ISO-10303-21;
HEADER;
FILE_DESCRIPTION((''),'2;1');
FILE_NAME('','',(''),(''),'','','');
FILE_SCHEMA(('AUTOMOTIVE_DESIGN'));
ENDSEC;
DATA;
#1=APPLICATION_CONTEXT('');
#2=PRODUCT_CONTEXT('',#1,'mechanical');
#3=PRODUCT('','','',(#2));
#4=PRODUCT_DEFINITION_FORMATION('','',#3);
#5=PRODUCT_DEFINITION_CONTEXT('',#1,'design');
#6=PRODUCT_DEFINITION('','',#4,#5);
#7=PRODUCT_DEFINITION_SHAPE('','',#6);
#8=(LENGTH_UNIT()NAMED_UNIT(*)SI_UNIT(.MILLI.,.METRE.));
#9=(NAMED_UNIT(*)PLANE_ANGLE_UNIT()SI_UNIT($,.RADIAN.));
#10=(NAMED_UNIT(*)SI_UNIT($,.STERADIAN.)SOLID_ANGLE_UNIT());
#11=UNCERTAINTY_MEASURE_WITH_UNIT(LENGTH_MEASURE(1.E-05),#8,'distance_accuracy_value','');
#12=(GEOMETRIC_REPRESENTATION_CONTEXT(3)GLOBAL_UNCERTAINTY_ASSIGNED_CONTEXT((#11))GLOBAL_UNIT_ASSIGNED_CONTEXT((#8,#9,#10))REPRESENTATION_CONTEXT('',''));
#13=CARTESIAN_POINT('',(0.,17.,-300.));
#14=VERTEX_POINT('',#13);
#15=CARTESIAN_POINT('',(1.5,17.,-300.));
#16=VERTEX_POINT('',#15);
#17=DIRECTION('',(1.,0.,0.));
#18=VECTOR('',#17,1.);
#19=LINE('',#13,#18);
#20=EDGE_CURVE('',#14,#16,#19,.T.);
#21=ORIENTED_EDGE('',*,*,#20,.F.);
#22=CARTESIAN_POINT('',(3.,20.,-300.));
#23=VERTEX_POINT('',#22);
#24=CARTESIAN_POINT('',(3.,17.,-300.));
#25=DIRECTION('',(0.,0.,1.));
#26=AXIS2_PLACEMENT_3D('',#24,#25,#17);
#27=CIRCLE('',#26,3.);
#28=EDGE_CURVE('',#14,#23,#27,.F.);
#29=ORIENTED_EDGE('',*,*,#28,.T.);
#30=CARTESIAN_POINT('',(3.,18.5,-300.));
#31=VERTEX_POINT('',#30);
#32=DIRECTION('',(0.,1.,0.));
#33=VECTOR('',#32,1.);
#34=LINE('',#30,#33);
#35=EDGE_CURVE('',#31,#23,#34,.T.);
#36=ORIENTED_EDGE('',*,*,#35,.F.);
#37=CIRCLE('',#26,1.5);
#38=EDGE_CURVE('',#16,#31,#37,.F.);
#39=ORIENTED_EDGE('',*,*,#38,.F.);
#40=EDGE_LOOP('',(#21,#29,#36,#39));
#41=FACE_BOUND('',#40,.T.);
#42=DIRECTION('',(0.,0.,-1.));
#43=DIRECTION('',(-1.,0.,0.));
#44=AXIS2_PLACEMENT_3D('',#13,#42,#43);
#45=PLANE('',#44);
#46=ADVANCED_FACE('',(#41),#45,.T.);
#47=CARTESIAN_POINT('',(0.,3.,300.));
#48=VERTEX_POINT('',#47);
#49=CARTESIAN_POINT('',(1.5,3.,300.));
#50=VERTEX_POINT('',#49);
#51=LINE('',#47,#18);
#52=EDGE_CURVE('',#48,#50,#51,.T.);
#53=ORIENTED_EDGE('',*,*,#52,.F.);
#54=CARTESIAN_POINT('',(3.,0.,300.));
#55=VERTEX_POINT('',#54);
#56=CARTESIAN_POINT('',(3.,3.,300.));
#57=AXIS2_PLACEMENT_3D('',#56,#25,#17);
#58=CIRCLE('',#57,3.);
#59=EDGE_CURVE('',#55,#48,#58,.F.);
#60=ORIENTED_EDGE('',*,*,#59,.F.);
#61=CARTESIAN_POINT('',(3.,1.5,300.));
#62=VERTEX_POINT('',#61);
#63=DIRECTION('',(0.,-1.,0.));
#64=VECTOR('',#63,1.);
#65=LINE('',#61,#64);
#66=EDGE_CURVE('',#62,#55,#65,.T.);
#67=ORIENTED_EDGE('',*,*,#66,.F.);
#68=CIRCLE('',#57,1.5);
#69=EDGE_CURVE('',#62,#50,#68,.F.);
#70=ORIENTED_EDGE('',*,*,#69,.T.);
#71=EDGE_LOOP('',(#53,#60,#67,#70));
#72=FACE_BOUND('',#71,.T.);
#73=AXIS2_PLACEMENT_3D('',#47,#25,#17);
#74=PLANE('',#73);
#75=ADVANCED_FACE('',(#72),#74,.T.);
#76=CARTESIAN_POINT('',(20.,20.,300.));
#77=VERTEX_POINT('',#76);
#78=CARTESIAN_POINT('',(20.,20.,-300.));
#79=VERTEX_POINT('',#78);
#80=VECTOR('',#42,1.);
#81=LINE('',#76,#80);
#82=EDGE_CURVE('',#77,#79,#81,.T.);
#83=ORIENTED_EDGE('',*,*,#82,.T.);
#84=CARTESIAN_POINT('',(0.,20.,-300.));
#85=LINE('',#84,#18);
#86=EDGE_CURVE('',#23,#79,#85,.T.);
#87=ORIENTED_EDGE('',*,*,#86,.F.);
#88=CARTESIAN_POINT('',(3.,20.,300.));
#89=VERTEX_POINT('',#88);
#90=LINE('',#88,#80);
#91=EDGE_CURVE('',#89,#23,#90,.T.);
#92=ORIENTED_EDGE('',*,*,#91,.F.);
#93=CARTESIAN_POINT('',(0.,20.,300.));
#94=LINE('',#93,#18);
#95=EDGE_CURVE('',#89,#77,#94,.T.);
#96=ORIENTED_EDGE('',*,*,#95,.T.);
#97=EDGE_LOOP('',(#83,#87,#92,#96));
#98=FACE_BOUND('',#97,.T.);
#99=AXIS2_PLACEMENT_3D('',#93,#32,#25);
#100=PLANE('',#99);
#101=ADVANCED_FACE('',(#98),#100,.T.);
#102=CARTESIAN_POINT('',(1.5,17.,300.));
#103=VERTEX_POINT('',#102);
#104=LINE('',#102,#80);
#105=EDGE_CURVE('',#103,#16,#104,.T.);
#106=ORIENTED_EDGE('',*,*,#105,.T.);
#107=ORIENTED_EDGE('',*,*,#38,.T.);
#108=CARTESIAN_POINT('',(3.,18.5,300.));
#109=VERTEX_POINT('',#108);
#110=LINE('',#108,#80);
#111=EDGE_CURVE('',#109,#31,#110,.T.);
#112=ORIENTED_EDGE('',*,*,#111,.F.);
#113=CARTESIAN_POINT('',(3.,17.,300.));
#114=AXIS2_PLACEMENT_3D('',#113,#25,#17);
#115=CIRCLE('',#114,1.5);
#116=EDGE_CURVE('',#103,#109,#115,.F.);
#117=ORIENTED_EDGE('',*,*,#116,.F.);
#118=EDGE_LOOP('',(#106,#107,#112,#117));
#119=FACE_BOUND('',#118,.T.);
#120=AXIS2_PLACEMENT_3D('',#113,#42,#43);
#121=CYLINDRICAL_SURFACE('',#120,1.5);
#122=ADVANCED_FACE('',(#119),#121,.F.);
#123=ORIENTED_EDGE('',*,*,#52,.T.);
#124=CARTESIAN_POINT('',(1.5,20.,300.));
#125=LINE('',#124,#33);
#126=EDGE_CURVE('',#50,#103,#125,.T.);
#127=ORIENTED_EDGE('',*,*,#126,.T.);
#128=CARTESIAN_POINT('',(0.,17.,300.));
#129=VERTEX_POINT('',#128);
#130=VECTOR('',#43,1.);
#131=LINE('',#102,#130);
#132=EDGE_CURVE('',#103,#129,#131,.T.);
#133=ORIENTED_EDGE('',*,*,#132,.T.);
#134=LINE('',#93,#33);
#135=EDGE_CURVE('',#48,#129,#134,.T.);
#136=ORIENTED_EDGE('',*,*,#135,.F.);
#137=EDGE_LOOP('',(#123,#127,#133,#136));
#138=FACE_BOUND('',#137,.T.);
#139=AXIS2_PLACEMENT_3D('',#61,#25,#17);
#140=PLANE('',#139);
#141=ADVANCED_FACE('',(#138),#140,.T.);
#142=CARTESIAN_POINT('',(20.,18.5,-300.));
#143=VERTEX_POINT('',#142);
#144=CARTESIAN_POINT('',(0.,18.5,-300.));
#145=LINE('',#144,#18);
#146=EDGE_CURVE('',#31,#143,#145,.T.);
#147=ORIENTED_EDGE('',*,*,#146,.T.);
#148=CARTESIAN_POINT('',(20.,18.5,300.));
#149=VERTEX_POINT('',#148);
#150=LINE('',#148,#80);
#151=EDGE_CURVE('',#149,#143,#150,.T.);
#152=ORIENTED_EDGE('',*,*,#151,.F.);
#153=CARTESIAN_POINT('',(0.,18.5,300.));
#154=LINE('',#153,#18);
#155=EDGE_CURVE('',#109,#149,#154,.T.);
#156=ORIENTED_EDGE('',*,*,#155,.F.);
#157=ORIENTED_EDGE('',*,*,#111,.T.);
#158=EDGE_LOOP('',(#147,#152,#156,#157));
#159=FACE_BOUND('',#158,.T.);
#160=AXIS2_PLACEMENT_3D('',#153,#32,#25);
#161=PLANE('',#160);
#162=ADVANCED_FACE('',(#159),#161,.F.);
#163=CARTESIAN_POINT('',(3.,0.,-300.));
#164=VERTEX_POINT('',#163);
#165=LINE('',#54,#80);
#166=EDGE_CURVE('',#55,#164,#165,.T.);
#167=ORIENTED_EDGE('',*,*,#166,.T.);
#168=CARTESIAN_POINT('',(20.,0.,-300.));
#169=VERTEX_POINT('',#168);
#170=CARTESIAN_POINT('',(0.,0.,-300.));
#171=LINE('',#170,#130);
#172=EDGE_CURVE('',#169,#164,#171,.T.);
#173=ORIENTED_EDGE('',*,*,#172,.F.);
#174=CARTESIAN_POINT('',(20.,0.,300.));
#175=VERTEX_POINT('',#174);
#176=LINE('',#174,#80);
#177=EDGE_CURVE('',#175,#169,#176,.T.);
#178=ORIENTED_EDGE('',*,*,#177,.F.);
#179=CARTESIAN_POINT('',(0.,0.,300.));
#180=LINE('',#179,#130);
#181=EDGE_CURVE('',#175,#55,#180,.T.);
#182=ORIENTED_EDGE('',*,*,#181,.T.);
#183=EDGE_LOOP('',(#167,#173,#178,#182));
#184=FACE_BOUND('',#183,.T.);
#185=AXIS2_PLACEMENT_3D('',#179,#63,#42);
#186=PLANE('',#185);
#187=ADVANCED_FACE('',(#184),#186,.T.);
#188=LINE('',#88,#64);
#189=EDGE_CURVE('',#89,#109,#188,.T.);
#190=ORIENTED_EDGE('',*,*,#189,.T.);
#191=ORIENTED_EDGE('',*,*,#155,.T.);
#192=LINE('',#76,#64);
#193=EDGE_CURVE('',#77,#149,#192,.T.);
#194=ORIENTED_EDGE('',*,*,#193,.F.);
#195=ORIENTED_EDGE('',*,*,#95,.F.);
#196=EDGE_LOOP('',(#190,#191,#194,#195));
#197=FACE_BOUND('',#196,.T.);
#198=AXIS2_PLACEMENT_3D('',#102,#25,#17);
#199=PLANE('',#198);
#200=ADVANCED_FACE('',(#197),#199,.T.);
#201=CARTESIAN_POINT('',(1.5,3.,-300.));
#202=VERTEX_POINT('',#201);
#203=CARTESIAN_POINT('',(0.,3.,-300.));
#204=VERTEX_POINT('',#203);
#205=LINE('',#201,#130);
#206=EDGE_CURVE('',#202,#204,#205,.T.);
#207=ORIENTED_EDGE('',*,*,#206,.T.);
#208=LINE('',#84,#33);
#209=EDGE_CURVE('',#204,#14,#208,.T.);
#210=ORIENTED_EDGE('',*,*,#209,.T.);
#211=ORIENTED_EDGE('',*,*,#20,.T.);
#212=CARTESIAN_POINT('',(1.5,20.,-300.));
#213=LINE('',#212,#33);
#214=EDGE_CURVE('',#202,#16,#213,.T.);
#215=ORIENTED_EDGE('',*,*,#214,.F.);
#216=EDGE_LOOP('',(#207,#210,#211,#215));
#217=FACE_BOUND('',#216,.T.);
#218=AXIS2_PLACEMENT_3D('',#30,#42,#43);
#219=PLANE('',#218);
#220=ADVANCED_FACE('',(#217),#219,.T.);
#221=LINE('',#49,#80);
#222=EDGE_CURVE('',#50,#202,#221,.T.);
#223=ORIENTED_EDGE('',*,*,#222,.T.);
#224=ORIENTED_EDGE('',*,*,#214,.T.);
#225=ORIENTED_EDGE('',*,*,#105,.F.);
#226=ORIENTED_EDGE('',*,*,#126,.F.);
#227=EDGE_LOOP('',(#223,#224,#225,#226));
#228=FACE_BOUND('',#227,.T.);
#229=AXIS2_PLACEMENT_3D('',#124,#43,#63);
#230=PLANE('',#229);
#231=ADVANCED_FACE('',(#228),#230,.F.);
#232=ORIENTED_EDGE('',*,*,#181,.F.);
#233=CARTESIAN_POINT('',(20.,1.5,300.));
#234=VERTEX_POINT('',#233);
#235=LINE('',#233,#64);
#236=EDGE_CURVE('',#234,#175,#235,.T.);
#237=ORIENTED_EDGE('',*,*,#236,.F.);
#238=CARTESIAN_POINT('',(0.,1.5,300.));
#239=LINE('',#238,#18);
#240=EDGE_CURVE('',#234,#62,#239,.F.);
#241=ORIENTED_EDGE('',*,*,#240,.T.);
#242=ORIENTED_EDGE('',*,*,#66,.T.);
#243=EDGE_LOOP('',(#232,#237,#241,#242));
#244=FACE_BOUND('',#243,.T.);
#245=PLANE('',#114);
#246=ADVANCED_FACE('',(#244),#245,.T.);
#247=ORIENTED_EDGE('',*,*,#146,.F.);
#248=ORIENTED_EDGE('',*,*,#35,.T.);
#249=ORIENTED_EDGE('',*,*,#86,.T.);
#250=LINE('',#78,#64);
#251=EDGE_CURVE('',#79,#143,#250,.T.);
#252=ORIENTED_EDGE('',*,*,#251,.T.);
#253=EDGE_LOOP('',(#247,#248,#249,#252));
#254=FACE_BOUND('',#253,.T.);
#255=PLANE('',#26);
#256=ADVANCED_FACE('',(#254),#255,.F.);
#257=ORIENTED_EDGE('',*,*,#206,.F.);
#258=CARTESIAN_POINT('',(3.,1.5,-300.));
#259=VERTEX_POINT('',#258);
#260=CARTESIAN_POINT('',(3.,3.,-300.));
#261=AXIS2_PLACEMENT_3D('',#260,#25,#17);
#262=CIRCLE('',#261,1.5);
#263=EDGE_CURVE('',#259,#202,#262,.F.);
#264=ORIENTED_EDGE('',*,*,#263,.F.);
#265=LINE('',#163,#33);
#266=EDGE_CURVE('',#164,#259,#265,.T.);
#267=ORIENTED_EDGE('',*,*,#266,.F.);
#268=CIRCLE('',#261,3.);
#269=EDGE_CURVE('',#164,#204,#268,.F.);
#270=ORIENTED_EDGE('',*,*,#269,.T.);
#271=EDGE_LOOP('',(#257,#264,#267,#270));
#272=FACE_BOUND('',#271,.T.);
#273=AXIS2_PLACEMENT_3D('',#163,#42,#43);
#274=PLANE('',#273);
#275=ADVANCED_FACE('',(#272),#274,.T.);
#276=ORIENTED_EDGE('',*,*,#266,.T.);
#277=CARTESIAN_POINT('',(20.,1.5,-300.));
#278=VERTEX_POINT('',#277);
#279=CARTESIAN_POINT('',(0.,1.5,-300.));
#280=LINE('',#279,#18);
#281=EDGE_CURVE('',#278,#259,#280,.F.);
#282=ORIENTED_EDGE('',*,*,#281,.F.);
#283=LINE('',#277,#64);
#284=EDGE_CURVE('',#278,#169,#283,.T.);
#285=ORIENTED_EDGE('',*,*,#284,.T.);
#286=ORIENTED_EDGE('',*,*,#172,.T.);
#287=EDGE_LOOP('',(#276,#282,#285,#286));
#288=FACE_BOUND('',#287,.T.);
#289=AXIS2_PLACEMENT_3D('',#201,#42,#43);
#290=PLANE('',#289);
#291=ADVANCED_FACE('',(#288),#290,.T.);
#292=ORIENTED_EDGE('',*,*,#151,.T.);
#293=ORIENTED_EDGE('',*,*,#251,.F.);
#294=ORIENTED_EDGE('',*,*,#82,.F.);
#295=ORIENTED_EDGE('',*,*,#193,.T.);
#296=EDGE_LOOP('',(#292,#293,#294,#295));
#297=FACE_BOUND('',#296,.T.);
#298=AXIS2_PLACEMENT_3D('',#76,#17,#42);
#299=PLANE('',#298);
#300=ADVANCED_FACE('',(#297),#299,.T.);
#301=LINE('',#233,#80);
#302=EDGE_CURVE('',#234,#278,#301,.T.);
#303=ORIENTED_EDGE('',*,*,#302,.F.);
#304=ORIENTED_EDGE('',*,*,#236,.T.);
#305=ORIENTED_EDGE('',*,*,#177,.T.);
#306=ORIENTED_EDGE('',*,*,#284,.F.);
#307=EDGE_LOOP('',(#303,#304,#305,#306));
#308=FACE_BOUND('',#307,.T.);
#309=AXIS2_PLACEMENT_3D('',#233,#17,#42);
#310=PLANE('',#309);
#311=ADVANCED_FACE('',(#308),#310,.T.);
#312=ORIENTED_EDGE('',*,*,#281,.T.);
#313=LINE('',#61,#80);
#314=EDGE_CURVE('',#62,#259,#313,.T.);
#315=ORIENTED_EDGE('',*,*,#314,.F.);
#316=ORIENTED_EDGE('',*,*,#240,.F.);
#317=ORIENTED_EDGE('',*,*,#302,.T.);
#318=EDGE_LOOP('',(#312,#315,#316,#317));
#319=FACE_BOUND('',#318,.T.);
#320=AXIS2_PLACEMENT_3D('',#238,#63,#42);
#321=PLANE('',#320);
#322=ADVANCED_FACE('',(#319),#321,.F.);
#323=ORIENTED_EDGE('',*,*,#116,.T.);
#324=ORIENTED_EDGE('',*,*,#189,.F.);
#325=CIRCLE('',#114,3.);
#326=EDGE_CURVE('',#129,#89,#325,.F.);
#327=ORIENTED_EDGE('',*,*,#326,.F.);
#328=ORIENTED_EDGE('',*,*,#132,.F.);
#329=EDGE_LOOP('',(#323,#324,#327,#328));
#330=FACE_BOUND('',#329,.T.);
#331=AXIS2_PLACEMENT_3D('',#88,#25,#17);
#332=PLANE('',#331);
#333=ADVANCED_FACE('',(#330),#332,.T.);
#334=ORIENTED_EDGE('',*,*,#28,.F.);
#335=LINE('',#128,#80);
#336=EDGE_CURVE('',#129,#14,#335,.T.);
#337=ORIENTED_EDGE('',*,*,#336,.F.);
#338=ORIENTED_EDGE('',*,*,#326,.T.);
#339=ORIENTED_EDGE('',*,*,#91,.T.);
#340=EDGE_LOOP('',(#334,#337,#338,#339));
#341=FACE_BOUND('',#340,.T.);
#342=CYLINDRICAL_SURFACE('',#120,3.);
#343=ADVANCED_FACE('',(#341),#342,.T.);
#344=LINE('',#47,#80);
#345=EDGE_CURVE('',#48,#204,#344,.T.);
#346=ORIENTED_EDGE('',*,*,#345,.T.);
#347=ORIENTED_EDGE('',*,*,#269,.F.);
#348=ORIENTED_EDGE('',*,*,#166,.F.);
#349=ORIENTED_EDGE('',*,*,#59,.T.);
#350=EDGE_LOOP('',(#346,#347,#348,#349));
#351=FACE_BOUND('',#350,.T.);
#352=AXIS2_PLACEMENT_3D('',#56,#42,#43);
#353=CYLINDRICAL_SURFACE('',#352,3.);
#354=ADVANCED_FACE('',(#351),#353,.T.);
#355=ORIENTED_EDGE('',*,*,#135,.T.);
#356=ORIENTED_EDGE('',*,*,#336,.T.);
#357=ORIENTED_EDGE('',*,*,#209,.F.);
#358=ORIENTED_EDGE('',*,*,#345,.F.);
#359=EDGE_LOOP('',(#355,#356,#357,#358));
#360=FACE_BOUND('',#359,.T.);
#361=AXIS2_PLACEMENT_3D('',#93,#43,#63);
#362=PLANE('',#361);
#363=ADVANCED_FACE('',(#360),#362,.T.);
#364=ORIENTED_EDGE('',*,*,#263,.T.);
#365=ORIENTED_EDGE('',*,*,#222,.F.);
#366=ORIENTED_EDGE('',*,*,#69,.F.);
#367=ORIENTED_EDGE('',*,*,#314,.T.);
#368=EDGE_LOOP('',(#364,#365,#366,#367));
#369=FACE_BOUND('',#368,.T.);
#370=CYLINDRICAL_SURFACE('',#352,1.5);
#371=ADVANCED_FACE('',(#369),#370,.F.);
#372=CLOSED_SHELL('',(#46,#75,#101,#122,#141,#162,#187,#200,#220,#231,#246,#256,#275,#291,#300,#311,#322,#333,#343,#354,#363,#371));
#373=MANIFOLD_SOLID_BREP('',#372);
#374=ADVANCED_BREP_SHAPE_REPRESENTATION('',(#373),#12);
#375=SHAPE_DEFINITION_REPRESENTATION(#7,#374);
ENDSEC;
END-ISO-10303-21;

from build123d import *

# Parameters (mm, degrees)
SM_BASE_FLANGE_1_DEPTH = 300


# Sheet-metal steps are written as plain solids
with BuildPart() as part:
    # Sketch 1 → Базовая кромка1 (new, symmetric)
    with BuildSketch(Plane.XY):
        with BuildLine():
            Line((20, 20), (3, 20))
            ThreePointArc((3, 20), (0.878679656, 19.121320344), (0, 17))
            Line((0, 17), (0, 3))
            ThreePointArc((0, 3), (0.878679656, 0.878679656), (3, 0))
            Line((3, 0), (20, 0))
            Line((20, 0), (20, 1.5))
            Line((20, 1.5), (3, 1.5))
            ThreePointArc((3, 1.5), (1.939339828, 1.939339828), (1.5, 3))
            Line((1.5, 3), (1.5, 17))
            ThreePointArc((1.5, 17), (1.939339828, 18.060660172), (3, 18.5))
            Line((3, 18.5), (20, 18.5))
            Line((20, 18.5), (20, 20))
        make_face()
    extrude(amount=SM_BASE_FLANGE_1_DEPTH, both=True)


solid = part.part
